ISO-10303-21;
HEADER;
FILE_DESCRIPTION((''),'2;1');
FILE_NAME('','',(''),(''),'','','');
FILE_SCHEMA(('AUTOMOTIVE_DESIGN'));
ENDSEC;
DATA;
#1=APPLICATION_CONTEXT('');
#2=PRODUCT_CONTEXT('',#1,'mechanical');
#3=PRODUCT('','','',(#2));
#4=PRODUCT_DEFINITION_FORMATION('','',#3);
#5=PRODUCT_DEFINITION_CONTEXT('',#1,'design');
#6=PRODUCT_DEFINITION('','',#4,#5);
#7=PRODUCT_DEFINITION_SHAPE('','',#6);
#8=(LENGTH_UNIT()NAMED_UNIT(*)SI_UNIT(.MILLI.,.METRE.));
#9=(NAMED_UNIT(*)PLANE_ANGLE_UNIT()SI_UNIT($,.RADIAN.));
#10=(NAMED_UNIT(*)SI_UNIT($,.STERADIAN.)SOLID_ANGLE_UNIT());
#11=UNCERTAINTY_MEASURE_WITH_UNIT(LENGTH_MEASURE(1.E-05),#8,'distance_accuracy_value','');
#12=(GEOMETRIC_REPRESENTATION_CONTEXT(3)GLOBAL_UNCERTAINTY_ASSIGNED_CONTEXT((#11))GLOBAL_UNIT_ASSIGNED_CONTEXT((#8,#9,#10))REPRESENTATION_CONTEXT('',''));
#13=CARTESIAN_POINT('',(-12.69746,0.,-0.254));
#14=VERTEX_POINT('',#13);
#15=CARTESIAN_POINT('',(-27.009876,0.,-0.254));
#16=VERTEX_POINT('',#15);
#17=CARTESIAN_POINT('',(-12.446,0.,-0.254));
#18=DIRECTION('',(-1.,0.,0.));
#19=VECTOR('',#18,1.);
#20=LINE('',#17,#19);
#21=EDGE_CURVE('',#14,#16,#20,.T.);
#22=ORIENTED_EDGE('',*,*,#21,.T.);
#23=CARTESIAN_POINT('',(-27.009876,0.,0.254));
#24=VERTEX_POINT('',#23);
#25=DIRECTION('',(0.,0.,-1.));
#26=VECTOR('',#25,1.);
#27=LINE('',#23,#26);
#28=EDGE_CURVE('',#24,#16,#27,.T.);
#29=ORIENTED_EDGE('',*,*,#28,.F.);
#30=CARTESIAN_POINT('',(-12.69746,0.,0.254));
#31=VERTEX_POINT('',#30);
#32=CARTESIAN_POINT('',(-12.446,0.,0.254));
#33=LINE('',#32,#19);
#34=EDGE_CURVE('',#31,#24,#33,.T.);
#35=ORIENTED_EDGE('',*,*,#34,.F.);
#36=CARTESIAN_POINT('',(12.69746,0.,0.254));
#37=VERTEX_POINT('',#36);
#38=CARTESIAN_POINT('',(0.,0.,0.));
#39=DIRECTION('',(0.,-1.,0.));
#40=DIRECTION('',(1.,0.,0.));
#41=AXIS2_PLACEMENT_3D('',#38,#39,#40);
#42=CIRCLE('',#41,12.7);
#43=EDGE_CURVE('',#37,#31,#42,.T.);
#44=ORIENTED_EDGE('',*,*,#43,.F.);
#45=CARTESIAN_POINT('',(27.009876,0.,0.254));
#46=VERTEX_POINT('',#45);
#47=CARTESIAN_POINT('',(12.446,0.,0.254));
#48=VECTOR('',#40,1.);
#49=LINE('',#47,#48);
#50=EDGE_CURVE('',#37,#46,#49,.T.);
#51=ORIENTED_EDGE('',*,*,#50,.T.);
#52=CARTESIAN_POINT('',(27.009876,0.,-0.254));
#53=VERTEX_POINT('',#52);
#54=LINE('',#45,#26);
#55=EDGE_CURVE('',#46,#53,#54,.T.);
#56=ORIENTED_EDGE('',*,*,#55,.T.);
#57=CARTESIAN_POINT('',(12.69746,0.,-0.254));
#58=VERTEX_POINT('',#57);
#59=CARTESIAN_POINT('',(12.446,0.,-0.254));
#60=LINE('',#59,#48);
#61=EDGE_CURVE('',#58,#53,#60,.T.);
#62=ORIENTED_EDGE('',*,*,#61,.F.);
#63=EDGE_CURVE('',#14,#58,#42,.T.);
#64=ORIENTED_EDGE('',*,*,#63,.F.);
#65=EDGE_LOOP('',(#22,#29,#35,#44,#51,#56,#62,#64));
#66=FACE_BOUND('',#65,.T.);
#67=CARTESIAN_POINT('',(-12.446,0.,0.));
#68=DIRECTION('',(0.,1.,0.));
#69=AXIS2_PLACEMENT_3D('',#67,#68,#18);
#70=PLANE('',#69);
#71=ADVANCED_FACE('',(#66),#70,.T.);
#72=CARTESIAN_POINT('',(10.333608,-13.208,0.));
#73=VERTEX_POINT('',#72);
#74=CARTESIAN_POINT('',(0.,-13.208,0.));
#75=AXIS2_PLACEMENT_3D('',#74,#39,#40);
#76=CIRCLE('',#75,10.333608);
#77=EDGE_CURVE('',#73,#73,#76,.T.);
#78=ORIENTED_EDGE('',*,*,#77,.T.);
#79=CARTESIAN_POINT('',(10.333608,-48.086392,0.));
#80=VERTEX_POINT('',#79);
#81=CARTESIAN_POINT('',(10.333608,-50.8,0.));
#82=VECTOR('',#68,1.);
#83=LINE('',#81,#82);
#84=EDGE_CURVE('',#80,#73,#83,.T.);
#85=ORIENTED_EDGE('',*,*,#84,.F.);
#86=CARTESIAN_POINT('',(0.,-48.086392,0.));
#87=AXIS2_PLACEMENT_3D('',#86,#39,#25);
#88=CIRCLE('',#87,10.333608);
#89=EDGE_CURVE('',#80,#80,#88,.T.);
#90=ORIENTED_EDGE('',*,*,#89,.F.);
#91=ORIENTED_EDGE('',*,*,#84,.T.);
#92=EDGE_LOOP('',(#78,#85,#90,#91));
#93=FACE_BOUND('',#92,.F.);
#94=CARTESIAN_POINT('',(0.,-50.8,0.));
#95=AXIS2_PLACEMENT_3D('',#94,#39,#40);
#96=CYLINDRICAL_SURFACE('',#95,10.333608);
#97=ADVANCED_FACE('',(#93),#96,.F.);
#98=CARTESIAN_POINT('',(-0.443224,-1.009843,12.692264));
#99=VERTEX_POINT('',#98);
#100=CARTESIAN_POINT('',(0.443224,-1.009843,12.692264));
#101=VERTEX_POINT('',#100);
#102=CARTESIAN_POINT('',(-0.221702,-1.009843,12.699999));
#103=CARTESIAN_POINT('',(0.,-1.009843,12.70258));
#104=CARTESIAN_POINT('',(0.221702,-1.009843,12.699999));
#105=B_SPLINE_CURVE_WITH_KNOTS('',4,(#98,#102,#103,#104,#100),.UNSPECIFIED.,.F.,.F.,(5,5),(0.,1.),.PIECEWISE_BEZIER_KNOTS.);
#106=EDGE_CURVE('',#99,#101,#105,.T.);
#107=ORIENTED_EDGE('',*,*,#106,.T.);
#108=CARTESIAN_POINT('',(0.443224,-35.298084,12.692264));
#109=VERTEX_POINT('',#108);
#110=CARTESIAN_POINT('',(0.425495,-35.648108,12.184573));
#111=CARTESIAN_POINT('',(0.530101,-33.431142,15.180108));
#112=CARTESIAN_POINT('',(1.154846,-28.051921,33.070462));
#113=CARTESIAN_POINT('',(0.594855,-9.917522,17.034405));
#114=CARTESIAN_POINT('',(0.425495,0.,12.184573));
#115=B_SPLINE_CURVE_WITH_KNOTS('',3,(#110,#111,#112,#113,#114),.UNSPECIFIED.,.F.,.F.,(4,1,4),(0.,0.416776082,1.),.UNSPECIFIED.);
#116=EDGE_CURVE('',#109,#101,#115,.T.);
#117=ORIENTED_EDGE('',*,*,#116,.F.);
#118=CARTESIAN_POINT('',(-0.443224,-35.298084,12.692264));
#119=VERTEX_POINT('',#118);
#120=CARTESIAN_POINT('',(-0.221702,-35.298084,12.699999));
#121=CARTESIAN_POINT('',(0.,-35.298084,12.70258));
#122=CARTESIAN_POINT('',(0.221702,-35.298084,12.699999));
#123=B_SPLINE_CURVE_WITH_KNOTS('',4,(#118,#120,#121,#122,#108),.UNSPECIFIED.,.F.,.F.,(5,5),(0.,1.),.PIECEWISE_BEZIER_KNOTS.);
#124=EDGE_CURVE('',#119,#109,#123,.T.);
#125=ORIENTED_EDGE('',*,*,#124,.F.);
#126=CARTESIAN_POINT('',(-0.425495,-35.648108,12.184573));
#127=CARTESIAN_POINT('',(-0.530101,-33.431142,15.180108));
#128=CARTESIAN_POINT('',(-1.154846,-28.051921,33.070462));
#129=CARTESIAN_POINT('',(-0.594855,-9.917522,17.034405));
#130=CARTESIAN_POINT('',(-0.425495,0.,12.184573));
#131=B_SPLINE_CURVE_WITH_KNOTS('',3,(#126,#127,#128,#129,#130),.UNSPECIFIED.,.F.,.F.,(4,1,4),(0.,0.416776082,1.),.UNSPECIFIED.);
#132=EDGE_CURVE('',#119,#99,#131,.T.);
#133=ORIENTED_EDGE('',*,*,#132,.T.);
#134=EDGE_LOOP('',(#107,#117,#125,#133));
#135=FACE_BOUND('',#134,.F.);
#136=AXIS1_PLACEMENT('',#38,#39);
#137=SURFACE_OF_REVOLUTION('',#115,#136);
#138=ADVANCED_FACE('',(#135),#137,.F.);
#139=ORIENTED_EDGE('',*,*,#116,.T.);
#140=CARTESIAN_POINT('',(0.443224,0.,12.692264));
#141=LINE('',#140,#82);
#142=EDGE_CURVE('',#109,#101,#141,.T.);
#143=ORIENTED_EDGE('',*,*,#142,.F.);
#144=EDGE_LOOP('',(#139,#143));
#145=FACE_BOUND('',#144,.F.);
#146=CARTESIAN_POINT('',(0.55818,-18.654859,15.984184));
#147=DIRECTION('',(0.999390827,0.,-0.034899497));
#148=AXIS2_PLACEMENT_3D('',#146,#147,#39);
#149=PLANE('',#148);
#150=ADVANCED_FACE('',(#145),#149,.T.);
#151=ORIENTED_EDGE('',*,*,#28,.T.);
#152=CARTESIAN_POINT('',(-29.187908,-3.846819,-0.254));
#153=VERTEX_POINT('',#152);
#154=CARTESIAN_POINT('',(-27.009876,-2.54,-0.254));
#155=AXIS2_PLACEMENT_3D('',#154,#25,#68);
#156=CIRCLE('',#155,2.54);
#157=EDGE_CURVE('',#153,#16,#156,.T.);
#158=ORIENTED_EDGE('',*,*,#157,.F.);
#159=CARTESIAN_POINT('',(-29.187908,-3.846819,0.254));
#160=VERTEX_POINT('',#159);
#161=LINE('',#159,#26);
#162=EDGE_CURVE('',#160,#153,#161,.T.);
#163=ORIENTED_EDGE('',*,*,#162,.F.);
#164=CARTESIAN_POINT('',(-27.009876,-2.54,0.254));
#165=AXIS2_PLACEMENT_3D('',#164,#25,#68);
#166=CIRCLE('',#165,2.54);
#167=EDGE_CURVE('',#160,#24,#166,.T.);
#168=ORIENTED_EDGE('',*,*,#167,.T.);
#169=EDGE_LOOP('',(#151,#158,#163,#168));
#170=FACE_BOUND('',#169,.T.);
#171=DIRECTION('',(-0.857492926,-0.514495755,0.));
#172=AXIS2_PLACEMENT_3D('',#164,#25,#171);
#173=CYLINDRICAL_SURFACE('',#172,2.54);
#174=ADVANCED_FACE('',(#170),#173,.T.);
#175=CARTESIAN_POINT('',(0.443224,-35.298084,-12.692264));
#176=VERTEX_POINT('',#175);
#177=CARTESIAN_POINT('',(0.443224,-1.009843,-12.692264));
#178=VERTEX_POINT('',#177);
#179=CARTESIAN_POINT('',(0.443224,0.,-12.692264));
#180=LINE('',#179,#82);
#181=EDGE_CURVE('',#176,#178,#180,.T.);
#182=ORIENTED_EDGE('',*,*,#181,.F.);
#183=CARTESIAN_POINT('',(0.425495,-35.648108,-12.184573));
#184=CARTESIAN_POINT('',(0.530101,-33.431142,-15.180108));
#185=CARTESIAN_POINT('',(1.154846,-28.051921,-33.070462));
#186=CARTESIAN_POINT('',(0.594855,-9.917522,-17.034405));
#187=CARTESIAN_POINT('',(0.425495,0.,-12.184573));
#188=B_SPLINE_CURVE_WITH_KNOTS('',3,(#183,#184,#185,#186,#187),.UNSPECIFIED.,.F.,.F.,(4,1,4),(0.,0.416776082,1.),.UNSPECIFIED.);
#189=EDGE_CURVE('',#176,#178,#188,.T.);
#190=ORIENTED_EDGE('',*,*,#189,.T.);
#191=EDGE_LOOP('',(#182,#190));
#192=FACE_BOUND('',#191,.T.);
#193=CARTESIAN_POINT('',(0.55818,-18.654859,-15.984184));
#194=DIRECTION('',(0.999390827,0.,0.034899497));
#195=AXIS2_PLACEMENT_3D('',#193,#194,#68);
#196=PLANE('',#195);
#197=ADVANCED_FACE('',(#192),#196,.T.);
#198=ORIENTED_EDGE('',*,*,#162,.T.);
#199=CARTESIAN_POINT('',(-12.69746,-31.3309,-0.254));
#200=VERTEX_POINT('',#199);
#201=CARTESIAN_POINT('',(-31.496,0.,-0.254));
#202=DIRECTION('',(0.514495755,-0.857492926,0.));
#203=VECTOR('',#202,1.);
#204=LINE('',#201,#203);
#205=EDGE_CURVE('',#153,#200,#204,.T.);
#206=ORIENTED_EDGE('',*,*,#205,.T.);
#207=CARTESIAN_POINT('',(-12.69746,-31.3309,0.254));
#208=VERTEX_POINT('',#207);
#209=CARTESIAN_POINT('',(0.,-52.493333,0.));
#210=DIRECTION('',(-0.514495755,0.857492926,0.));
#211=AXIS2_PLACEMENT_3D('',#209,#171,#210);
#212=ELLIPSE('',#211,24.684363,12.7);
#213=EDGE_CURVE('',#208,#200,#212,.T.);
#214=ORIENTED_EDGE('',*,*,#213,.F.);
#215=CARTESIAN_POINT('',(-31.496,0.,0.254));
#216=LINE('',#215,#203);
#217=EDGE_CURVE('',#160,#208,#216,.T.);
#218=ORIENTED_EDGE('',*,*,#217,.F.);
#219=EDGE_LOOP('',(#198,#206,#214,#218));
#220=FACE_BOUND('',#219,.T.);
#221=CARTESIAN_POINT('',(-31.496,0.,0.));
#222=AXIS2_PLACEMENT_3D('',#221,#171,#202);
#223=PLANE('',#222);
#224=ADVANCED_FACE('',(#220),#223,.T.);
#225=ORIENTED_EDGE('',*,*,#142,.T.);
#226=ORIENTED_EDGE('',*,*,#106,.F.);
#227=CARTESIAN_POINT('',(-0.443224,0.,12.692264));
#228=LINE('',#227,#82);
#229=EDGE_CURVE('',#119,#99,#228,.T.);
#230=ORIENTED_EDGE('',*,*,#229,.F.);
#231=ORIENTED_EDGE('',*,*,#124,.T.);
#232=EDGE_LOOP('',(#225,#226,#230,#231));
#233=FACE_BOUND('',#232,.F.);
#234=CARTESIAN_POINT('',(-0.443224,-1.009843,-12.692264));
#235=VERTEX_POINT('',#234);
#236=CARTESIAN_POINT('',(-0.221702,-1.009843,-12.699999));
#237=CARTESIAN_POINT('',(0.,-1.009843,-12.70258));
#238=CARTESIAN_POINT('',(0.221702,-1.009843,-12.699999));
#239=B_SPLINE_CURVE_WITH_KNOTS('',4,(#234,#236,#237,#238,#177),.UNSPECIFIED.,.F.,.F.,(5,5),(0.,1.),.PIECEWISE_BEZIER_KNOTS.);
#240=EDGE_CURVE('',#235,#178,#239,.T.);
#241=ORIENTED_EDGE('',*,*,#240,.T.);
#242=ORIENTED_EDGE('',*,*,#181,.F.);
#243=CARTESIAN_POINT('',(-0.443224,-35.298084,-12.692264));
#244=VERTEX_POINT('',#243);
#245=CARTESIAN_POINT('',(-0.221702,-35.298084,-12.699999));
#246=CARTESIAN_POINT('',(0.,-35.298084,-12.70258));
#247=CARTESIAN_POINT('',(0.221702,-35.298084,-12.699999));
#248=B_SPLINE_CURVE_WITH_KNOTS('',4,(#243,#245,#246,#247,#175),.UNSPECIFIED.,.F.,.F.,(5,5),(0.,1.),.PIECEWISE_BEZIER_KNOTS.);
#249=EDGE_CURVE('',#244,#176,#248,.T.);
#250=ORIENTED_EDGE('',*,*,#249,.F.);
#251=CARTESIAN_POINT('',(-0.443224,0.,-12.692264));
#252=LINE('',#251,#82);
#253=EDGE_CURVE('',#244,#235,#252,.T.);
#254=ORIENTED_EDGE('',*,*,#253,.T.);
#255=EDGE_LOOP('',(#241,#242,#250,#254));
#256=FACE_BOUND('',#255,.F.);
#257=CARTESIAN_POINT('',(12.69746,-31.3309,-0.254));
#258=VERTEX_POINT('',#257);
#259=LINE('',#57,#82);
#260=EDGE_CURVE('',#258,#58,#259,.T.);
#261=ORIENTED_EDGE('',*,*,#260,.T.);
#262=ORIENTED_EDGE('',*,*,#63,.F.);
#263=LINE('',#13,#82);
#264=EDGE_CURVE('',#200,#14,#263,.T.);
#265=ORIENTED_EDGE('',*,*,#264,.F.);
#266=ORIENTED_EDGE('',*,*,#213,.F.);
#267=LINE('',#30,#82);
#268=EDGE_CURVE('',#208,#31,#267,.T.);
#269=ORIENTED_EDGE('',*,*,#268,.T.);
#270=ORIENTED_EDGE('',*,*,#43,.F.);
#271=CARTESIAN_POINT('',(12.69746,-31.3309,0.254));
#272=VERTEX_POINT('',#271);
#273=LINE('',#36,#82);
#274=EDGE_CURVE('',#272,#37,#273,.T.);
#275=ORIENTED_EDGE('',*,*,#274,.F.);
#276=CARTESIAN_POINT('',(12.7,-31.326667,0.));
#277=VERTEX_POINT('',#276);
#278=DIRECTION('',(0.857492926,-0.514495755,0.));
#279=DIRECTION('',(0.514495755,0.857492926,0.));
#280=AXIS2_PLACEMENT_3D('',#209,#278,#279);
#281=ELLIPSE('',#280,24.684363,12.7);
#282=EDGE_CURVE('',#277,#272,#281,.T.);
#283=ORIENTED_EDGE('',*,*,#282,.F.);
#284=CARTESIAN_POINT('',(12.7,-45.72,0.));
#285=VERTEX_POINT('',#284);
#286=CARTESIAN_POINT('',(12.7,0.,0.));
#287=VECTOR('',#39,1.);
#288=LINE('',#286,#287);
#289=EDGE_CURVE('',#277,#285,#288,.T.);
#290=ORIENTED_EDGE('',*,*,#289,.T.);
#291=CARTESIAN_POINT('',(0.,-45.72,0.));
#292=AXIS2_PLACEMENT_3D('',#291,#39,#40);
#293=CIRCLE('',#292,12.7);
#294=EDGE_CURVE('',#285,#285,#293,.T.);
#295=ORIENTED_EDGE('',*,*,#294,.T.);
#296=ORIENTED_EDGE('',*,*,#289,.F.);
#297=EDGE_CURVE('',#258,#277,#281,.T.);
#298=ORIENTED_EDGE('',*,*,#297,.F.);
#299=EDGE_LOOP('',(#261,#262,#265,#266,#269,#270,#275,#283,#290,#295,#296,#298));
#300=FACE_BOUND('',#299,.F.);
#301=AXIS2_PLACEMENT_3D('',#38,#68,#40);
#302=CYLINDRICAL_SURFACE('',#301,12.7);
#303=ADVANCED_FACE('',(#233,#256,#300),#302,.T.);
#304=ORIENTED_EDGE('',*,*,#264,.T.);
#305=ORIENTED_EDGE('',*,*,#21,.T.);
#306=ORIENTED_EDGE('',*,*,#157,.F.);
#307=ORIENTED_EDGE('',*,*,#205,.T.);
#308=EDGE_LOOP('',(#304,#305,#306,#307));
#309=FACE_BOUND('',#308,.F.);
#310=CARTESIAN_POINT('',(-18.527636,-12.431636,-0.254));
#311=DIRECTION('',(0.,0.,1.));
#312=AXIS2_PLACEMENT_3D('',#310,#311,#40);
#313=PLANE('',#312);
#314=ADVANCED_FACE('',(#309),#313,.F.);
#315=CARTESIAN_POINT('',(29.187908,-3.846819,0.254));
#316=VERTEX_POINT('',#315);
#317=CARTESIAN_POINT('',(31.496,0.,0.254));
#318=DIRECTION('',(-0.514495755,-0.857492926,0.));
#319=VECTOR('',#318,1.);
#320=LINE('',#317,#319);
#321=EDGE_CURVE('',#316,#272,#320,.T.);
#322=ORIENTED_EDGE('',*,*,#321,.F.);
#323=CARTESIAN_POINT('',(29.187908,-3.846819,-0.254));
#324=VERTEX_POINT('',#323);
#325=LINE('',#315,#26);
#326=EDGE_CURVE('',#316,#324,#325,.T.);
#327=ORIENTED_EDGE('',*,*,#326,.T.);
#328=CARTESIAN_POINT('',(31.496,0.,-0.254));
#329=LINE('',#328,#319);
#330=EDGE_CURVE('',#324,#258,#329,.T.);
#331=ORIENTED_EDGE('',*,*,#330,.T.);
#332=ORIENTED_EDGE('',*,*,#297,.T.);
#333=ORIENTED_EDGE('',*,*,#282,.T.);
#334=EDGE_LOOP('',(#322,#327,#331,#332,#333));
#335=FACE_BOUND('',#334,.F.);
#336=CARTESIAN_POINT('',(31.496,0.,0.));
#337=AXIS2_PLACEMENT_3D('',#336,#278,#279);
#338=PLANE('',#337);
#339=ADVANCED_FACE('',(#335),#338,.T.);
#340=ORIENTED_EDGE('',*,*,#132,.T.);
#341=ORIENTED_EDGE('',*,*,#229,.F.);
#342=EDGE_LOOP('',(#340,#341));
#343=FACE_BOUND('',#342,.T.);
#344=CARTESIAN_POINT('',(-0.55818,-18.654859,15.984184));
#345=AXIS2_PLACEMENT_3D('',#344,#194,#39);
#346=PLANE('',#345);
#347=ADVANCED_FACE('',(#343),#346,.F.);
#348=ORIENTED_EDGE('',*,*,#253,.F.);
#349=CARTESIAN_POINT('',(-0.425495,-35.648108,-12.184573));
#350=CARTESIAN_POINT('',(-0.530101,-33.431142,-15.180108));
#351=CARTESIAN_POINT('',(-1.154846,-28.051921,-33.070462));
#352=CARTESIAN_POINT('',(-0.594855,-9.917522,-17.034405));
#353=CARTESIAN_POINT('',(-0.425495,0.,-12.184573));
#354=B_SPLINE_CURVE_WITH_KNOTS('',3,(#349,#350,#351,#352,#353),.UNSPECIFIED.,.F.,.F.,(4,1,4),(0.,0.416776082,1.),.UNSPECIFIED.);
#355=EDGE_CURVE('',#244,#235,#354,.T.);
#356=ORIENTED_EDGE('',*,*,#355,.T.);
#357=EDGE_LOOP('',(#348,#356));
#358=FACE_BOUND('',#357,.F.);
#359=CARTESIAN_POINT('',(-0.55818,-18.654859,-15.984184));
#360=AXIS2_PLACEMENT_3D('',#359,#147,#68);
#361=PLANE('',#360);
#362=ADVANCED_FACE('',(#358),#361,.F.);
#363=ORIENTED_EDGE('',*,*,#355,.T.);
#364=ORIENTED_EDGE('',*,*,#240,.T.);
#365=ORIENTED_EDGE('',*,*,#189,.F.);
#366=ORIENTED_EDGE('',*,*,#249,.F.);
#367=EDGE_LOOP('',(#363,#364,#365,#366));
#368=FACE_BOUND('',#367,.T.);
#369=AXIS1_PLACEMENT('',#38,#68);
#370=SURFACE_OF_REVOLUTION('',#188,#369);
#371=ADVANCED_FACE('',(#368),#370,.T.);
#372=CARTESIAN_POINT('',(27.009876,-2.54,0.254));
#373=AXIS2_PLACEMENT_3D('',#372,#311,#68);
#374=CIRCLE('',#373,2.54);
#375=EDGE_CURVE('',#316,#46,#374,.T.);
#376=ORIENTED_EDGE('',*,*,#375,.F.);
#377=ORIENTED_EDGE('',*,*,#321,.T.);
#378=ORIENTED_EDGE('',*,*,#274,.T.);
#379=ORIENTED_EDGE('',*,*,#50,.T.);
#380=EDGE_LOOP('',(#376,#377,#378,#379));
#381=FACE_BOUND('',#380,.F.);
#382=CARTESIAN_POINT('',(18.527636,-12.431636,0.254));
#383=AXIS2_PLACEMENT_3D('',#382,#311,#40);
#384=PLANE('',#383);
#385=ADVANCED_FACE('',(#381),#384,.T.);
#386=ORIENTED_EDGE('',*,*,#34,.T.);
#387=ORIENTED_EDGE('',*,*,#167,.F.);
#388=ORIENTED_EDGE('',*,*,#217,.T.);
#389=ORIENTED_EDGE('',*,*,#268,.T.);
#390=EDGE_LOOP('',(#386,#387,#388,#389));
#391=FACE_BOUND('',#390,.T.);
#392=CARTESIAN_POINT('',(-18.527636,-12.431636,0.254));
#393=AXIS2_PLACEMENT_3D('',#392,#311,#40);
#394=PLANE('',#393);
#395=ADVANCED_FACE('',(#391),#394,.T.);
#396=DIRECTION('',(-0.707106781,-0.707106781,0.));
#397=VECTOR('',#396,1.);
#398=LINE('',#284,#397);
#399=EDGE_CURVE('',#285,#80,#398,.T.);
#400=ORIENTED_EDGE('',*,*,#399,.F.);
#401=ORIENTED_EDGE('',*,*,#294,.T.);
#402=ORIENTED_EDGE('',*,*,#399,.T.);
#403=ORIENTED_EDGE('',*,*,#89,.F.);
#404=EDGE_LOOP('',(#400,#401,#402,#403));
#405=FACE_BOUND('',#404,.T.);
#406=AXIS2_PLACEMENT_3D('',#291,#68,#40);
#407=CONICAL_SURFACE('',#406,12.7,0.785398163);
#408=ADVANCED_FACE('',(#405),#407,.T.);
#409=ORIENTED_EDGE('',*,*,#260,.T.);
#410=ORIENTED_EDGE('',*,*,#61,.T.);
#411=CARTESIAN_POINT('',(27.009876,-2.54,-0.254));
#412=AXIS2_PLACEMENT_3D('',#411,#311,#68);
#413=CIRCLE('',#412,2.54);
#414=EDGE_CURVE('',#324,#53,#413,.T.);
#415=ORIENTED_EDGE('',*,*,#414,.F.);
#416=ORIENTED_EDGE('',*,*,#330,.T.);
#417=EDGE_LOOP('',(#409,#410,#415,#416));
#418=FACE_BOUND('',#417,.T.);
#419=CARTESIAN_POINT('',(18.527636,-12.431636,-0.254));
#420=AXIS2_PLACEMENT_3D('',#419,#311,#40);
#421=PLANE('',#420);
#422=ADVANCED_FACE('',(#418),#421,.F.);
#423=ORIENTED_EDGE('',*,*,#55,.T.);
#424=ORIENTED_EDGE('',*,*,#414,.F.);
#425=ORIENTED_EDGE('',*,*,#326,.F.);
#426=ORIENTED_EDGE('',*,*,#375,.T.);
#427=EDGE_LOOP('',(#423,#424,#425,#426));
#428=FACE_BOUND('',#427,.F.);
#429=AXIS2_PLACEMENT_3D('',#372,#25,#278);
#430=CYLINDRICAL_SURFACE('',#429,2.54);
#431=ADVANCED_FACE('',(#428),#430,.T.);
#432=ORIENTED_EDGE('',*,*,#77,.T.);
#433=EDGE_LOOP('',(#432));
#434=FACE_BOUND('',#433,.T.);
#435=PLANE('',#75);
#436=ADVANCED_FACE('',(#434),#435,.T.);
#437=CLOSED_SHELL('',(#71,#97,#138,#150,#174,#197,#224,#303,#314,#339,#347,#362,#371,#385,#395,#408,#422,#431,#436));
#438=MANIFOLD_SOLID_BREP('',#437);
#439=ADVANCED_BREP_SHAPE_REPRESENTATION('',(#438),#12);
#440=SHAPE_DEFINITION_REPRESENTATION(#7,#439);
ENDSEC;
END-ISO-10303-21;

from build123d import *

# Parameters (mm, degrees)
F0_R          = 12.7
F1_DEPTH      = 50.8
F2_R          = 10.3336081204
F3_DEPTH      = 37.592
F6_DEPTH      = 0.254
F7_R          = 2.54
F9_ANGLE_BACK = 2
F9_ANGLE      = 4


# Not quite as in the source:
# - a fillet or chamfer that OpenCascade refuses, or shapes differently, is made with other operations: its cross-section is extruded or revolved along the edge and cut away or added


with BuildPart() as f1:
    # F0 (on Front) → F1 (new body)
    with BuildSketch(Plane.XZ):
        Circle(F0_R)
    extrude(amount=F1_DEPTH)

    # F2 (on face) → F3 (cut)
    with BuildSketch(Plane.XZ.offset(50.8)):
        Circle(F2_R)
    extrude(amount=-F3_DEPTH, mode=Mode.SUBTRACT)

    # F8: F6 across plane


with BuildPart() as f6:
    # F5 (on Top) → F6 (new body, symmetric)
    with BuildSketch(Plane.XY):
        Polygon((-12.446, -31.75), (-12.446, 0), (-31.496, 0), align=None)
    extrude(amount=F6_DEPTH, both=True)

    # F7
    f7_edges = [f6.edges().sort_by_distance(p)[0] for p in [
        (-31.496, 0, 0),
    ]]
    fillet(f7_edges, radius=F7_R)


with BuildPart() as f1_1:
    add(f1.part)
    add(f6.part.mirror(Plane.YZ))

    # F4 (on Right) → F9 (revolve)
    with BuildSketch(Plane.YZ, mode=Mode.PRIVATE) as f9_sk:
        with BuildLine():
            Line((0, -12.192), (-35.6481084037, -12.192))
            add(Edge.make_bspline(
                [(-35.6481084037, -12.192), (-33.4311420603, -15.1893612741), (-28.0519206857, -33.0906197841), (-9.917521665, -17.0447887187), (0, -12.192)],
                knots=[0, 0, 0, 0, 0.4167760817, 1, 1, 1, 1], degree=3))
        make_face()
    revolve(f9_sk.sketch.rotate(Axis((0, 0, 0), (0, 1, 0)), -F9_ANGLE_BACK), axis=Axis((0, 0, 0), (0, 1, 0)), revolution_arc=F9_ANGLE)

    # F10: chamfer of 5.08 on 1 edges, made by hand

    # F10_s1 → F10_t2 (revolve, cut)
    with BuildSketch(Plane.XY):
        Polygon((12.7, -45.72), (7.62, -50.8), (12.7, -50.8), align=None)
    revolve(axis=Axis((0, -50.8, 0), (0, -1, 0)), mode=Mode.SUBTRACT)



with BuildPart() as f1_2:
    add(f1_1.part)

    add(f6.part)  # F11 merges F6
    # F11: F1 across plane
    add(f1_1.part.mirror(Plane.XY))


solid = f1_2.part
